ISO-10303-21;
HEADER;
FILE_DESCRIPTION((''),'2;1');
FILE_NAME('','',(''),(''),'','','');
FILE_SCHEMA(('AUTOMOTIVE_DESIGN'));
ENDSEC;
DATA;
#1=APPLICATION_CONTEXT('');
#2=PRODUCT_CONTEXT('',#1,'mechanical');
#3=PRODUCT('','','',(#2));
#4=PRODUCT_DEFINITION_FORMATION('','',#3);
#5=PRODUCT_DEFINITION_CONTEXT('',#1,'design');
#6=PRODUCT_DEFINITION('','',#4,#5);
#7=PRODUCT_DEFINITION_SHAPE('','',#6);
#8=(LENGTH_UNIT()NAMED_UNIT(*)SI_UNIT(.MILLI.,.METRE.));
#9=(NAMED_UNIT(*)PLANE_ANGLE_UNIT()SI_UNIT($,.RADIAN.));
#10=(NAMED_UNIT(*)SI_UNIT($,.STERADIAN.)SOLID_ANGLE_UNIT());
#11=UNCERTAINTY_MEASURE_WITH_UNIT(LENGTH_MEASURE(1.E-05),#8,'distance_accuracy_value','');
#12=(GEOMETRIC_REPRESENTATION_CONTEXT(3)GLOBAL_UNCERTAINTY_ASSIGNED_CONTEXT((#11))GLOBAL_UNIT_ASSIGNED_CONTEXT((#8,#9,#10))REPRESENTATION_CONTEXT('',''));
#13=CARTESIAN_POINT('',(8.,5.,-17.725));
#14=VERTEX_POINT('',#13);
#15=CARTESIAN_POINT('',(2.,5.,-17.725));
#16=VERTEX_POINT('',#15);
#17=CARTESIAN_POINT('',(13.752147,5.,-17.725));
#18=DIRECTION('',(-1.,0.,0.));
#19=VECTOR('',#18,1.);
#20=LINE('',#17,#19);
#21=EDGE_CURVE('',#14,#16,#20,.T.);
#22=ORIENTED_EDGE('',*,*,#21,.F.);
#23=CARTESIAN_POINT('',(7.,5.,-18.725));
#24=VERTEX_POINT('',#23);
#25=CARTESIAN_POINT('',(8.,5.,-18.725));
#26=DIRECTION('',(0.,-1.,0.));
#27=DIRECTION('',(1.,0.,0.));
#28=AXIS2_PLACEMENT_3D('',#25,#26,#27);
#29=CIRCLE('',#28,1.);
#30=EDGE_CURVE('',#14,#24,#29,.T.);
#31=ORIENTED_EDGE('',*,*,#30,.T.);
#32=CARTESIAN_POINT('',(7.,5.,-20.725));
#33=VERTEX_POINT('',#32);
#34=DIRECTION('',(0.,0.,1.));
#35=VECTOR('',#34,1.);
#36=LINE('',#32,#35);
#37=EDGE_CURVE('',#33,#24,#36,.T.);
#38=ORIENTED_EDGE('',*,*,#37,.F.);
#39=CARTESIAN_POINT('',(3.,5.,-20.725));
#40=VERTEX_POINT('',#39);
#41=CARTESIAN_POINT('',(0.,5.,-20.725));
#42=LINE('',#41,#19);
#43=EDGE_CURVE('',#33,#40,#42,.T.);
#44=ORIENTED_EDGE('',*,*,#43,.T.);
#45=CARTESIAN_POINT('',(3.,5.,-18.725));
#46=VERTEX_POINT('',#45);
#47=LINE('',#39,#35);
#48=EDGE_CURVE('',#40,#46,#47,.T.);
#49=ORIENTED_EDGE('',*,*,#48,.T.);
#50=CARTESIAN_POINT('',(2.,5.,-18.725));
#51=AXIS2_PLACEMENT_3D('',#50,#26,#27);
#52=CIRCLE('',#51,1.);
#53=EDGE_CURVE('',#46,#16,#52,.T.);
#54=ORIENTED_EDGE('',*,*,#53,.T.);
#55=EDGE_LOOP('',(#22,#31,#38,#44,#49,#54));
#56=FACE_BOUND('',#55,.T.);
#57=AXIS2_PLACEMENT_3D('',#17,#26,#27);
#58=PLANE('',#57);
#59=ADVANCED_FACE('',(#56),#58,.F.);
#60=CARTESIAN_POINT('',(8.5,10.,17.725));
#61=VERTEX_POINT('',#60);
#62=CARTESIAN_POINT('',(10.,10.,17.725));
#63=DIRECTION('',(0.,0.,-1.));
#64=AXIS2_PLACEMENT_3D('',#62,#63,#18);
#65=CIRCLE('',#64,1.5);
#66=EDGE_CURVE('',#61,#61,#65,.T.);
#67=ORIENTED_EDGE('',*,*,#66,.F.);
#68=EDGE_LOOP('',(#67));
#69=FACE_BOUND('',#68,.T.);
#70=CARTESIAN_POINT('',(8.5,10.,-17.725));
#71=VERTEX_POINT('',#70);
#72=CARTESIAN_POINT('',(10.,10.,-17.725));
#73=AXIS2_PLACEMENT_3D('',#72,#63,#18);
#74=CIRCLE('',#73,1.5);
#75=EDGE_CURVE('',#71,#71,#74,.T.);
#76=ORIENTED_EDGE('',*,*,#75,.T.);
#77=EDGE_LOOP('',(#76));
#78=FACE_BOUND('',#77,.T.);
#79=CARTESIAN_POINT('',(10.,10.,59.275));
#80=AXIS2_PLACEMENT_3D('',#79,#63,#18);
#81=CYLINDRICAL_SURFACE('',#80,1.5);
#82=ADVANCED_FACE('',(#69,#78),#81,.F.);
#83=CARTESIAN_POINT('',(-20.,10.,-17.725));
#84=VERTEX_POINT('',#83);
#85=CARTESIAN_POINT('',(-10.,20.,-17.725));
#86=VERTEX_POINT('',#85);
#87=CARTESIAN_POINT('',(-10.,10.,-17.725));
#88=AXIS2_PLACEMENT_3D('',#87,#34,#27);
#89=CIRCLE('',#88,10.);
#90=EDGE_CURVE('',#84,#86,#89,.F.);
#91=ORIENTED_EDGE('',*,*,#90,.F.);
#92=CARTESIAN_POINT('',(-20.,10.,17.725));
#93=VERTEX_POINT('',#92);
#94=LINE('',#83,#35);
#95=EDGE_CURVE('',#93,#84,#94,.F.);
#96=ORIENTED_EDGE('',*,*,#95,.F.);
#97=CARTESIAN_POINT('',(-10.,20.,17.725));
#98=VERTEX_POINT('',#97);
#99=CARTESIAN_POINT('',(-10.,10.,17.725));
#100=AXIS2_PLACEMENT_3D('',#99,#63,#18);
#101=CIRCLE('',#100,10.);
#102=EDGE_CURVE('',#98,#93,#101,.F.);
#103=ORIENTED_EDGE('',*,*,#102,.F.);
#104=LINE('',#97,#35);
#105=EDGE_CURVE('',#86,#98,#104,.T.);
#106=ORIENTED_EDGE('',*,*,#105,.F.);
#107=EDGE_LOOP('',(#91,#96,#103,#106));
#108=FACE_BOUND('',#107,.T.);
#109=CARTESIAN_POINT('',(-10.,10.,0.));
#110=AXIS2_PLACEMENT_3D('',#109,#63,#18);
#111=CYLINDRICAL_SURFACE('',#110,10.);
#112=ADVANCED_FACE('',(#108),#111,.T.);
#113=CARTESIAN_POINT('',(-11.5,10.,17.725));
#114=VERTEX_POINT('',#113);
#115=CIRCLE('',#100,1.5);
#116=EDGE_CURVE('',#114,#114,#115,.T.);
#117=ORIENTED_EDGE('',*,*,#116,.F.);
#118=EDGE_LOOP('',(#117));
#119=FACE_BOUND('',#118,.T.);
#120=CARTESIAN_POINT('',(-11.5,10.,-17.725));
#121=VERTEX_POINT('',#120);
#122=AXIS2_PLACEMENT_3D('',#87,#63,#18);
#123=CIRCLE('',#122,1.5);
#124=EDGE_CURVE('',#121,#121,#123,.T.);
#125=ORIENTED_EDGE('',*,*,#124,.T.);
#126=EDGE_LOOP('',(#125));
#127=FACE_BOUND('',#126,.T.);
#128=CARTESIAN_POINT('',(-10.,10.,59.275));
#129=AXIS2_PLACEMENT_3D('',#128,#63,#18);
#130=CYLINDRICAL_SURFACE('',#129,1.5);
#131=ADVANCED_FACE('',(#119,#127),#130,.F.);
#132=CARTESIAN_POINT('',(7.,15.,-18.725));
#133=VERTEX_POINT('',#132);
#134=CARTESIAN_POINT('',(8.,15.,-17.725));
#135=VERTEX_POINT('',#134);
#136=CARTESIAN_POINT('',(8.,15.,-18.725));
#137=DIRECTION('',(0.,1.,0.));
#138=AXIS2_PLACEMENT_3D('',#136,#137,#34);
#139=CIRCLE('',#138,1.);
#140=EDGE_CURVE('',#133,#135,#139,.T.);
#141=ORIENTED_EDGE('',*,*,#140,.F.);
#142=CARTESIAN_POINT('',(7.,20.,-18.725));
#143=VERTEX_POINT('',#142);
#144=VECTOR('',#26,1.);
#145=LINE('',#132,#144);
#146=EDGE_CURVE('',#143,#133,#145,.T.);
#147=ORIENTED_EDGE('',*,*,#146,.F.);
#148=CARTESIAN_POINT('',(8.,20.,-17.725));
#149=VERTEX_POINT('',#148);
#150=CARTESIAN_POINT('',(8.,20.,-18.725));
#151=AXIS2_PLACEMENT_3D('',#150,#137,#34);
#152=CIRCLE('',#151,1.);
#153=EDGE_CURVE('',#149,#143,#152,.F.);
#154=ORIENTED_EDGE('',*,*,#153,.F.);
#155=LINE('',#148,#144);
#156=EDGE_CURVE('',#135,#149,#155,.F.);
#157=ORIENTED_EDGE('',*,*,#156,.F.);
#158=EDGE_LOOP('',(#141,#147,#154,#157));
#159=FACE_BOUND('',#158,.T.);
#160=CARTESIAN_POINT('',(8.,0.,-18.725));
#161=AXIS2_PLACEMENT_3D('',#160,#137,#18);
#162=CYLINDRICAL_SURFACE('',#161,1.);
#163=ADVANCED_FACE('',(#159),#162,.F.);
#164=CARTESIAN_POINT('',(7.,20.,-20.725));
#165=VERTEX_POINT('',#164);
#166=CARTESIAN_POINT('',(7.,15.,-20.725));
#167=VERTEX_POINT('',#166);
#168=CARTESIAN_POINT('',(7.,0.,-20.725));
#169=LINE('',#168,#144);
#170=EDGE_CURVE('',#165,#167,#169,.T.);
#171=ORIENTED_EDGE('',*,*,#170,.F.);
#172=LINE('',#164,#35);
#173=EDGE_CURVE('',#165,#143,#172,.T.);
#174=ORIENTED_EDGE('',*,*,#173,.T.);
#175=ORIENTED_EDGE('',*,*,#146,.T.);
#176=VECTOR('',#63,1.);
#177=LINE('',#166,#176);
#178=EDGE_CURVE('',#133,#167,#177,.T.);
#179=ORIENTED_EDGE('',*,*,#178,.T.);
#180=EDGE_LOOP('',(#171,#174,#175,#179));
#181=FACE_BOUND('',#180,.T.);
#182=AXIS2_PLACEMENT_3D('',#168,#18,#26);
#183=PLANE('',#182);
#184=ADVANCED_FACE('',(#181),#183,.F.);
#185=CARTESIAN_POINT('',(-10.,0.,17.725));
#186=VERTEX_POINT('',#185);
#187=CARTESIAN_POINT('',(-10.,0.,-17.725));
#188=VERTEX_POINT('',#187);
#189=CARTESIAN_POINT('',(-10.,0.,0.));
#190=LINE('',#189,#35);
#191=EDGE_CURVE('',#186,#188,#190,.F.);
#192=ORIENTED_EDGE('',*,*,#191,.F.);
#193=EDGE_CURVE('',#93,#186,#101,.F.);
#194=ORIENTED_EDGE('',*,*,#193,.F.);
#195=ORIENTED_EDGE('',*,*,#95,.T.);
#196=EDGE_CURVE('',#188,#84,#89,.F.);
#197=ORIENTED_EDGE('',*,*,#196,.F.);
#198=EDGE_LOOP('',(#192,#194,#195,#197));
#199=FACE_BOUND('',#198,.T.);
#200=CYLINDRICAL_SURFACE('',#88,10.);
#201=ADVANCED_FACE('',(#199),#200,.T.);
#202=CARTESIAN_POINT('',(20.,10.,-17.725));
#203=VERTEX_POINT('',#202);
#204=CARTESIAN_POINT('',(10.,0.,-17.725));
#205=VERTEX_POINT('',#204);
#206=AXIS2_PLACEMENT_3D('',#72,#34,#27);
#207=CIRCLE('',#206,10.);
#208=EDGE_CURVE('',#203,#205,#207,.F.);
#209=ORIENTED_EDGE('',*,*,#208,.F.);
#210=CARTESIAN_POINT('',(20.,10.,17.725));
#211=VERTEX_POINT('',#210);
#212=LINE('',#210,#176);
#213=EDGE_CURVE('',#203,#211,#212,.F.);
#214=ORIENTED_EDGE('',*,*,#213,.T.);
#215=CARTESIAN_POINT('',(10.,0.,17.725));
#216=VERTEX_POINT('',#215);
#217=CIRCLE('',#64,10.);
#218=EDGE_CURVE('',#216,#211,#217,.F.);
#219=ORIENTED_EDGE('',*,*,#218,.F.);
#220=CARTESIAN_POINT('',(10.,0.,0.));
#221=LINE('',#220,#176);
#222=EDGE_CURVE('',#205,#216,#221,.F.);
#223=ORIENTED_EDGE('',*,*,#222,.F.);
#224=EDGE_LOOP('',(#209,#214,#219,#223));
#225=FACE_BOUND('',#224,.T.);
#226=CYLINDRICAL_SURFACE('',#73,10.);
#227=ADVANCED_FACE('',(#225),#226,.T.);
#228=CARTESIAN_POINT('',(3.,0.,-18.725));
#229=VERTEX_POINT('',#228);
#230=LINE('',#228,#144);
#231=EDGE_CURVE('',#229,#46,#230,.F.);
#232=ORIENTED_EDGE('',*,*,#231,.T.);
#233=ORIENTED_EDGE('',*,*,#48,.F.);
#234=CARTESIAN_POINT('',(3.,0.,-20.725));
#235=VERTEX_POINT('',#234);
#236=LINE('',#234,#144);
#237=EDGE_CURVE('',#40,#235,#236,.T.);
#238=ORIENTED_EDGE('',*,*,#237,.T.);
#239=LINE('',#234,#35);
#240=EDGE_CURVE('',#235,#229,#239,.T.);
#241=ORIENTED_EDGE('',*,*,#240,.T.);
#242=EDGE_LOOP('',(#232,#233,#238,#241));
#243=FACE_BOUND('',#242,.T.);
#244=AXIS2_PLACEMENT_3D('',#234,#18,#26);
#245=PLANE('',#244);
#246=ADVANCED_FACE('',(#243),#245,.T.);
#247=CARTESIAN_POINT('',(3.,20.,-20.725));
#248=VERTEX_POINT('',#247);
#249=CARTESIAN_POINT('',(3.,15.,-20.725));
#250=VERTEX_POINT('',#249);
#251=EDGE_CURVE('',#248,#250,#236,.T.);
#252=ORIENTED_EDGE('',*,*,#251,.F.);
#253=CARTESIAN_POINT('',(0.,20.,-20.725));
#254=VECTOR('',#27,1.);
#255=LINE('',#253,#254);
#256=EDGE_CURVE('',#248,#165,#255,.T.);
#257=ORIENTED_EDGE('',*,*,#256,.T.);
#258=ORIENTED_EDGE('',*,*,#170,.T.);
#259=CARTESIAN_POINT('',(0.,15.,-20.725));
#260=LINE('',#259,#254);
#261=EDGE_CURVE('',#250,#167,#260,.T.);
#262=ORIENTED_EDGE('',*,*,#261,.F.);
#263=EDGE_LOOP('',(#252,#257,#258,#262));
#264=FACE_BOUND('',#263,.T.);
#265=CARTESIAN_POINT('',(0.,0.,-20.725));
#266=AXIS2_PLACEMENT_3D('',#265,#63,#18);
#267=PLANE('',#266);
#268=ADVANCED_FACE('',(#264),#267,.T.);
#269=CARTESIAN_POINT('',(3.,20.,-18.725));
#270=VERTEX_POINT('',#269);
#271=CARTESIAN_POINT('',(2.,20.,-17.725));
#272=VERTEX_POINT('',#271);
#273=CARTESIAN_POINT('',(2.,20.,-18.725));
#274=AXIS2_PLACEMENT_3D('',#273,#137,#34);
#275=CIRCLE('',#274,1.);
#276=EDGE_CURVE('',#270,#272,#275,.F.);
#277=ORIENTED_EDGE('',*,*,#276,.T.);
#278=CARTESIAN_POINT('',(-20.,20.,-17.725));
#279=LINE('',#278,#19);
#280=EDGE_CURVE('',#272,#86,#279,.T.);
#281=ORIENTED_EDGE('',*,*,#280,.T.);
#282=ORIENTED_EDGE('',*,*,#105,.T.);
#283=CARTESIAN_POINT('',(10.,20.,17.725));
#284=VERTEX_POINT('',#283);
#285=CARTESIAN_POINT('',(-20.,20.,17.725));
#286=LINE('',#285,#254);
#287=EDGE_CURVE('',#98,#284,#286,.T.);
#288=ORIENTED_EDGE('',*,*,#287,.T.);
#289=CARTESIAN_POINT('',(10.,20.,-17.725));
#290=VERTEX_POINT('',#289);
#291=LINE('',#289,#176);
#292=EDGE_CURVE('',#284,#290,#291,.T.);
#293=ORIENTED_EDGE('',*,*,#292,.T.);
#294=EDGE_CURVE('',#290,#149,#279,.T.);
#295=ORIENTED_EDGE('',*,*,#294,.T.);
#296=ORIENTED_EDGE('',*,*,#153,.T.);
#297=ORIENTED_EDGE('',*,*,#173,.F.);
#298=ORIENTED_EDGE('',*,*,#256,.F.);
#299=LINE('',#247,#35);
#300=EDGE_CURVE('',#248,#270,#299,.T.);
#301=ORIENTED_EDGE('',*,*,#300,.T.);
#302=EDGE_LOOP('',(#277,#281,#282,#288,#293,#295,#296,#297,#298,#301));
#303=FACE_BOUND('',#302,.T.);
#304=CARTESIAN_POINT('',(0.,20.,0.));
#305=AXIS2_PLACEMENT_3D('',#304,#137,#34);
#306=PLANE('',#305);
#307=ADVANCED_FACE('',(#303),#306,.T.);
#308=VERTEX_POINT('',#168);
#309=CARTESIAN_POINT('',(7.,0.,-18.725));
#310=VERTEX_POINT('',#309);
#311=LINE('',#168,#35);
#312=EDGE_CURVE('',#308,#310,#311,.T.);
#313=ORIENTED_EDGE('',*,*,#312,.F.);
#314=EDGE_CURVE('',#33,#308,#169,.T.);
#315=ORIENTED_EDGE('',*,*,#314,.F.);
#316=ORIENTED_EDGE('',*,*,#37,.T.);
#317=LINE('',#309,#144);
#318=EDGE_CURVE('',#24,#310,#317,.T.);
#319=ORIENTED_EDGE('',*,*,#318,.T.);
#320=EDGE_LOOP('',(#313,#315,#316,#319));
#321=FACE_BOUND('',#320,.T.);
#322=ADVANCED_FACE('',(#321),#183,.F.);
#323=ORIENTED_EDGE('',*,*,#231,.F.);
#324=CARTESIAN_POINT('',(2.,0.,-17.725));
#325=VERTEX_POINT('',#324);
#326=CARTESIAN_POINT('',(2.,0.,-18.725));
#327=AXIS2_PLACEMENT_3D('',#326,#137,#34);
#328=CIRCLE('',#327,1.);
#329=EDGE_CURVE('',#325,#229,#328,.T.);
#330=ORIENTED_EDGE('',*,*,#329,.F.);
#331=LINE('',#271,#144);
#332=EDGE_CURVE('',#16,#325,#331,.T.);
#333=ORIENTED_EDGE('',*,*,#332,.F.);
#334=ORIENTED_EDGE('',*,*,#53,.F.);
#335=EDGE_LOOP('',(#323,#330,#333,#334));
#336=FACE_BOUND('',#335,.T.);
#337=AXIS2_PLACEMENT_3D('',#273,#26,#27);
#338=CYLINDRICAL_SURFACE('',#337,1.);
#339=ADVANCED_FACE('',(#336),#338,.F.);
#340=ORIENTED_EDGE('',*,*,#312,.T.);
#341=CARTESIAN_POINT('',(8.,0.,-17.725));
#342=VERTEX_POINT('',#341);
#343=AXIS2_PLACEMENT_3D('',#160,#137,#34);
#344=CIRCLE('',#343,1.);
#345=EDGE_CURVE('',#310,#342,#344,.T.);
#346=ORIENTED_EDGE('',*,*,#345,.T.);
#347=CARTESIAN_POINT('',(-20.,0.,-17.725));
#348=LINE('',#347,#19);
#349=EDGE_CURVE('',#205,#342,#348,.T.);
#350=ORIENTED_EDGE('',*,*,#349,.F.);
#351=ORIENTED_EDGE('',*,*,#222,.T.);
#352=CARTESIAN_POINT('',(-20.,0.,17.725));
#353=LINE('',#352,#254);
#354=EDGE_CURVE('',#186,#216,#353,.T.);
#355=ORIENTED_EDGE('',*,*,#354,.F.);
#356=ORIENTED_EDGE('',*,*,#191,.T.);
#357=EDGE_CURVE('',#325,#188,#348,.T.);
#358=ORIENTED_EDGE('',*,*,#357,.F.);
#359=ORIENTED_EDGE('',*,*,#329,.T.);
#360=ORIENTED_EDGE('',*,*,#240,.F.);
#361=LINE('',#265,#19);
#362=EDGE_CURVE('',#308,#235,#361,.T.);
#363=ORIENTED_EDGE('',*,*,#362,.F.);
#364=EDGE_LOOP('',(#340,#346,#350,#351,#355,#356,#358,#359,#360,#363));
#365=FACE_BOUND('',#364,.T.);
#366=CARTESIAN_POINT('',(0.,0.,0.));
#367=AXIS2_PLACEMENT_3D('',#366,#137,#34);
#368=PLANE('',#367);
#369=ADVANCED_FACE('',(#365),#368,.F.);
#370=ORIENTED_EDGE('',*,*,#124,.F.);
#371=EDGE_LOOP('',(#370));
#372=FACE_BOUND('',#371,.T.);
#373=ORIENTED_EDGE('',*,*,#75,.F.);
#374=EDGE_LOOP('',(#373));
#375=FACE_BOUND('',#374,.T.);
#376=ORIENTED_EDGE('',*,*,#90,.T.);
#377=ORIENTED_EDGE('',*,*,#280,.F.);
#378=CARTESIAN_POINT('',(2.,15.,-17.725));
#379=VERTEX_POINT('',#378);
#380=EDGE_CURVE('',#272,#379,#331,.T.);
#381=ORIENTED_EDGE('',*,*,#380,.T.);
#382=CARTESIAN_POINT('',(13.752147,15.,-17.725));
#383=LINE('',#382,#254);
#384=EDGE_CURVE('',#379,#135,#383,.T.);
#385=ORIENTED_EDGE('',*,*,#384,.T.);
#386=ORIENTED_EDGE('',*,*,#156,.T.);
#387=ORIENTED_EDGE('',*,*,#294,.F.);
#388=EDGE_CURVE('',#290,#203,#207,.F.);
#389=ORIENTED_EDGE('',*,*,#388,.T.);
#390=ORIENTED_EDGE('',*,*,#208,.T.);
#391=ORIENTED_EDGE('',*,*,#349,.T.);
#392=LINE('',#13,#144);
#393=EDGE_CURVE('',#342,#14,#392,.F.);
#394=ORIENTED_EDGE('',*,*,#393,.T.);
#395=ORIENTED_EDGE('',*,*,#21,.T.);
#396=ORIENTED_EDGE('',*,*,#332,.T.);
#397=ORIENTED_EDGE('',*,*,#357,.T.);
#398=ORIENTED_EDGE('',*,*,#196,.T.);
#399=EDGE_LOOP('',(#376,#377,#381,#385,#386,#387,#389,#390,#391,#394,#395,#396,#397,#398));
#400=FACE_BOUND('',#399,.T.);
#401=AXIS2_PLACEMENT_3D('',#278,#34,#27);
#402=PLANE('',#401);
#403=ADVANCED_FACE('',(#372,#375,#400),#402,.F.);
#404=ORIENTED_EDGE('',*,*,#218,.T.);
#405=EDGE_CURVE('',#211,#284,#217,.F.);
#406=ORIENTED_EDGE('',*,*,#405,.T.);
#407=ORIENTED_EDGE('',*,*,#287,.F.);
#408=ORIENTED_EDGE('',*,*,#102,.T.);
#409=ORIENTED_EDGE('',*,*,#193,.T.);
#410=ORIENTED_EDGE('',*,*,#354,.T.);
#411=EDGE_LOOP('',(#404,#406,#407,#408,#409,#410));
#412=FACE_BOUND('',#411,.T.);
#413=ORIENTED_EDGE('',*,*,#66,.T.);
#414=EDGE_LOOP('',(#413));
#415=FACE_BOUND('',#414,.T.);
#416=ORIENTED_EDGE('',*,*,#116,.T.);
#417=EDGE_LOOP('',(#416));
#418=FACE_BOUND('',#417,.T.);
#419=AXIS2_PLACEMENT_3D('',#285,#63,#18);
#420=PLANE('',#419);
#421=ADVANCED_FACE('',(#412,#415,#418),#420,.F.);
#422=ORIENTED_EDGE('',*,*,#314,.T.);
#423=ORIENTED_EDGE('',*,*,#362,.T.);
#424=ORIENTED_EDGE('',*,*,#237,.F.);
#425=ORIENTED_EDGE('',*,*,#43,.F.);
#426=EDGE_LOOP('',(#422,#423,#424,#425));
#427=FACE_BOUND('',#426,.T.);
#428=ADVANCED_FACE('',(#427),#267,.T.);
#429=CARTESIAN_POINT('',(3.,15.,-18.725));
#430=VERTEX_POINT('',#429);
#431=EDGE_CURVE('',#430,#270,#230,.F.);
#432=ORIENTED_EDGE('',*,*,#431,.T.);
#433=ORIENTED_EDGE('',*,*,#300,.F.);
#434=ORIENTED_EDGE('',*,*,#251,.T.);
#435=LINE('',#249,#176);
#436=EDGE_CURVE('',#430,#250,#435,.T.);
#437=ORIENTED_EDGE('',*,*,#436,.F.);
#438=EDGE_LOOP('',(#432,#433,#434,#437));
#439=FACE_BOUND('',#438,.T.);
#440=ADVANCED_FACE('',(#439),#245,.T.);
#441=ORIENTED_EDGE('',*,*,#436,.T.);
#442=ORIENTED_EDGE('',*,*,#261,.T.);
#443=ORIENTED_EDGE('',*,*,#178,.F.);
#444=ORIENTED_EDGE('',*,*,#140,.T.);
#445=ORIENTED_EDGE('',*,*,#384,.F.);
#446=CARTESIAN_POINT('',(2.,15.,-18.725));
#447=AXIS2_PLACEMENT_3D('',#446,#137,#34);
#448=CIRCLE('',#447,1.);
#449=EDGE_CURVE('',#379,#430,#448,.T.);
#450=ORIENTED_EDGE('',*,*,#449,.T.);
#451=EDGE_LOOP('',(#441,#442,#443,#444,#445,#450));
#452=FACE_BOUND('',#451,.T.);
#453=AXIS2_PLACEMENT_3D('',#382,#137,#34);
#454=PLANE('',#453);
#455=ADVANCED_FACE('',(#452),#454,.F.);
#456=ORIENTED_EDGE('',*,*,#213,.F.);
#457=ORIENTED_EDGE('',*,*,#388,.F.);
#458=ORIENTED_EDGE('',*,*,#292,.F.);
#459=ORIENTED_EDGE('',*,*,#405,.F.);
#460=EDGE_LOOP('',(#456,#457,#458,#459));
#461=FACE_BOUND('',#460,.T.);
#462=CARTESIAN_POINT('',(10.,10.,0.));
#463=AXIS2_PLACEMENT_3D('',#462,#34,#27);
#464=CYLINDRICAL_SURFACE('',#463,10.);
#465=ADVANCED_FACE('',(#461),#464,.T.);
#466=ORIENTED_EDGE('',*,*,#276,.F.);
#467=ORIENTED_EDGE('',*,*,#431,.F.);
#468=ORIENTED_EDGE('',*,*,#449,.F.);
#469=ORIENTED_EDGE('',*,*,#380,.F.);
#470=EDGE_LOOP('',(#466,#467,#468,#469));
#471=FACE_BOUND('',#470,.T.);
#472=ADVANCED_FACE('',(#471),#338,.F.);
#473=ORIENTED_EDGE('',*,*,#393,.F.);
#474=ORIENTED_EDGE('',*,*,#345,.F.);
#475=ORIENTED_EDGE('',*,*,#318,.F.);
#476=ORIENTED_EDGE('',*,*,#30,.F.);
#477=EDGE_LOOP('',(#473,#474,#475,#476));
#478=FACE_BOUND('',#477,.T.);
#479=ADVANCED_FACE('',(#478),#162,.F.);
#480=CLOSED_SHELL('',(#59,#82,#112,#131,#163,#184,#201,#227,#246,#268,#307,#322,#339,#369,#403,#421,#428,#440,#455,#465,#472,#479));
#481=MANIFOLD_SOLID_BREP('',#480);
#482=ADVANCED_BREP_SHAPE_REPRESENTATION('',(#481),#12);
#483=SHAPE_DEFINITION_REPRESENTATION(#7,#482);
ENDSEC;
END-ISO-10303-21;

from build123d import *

# Parameters (mm, degrees)
SKETCH_1_W          = 40
SKETCH_1_H          = 35.45
EXTRUDE_1_DEPTH     = 20
FILLET_1_R          = 10
SKETCH_2_R          = 1.5
CUT_EXTRUDE_1_DEPTH = 77
SKETCH_3_W          = 2
SKETCH_3_H          = 10
EXTRUDE_2_DEPTH     = 3
SKETCH_4_W          = 13.504293884
SKETCH_4_H          = 10
CUT_EXTRUDE_2_DEPTH = 3
FILLET_2_R          = 1


with BuildPart() as part:
    # 草图1 → 凸台-拉伸1 (new body)
    with BuildSketch(Plane(origin=(0, 0, 0), x_dir=(1, 0, 0), z_dir=(0, 1, 0))):
        Rectangle(SKETCH_1_W, SKETCH_1_H)
    extrude(amount=EXTRUDE_1_DEPTH)

    # 圆角1
    fillet_1_edges = [part.edges().sort_by_distance(p)[0] for p in [
        (-20, 0, 0),
        (-20, 20, 0),
        (20, 0, 0),
        (20, 20, 0),
    ]]
    fillet(fillet_1_edges, radius=FILLET_1_R - 0.0001)  # a hair under: the kernel refuses the full size

    # 草图2 → 切除-拉伸1 (cut)
    with BuildSketch(Plane(origin=(0, 0, -17.725), x_dir=(-1, 0, 0), z_dir=(0, 0, -1))):
        with Locations((-10, 10)):
            Circle(SKETCH_2_R)
        with Locations((10, 10)):
            Circle(SKETCH_2_R)
    extrude(amount=-CUT_EXTRUDE_1_DEPTH, mode=Mode.SUBTRACT)

    # 草图3 → 凸台-拉伸2 (add)
    with BuildSketch(Plane(origin=(0, 0, -17.725), x_dir=(-1, 0, 0), z_dir=(0, 0, -1))):
        with Locations((-6, 5)):
            Rectangle(SKETCH_3_W, SKETCH_3_H)
        with Locations((-6, 15)):
            Rectangle(SKETCH_3_W, SKETCH_3_H)
        with Locations((-4, 5)):
            Rectangle(SKETCH_3_W, SKETCH_3_H)
        with Locations((-4, 15)):
            Rectangle(SKETCH_3_W, SKETCH_3_H)
    extrude(amount=EXTRUDE_2_DEPTH)

    # 草图4 → 切除-拉伸2 (cut)
    with BuildSketch(Plane(origin=(0, 0, -20.725), x_dir=(-1, 0, 0), z_dir=(0, 0, -1))):
        with Locations((-7, 10)):
            Rectangle(SKETCH_4_W, SKETCH_4_H)
    extrude(amount=-CUT_EXTRUDE_2_DEPTH, mode=Mode.SUBTRACT)

    # 圆角2
    fillet_2_edges = [part.edges().sort_by_distance(p)[0] for p in [
        (7, 17.5, -17.725),
        (3, 17.5, -17.725),
        (7, 2.5, -17.725),
        (3, 2.5, -17.725),
    ]]
    fillet(fillet_2_edges, radius=FILLET_2_R)


solid = part.part
